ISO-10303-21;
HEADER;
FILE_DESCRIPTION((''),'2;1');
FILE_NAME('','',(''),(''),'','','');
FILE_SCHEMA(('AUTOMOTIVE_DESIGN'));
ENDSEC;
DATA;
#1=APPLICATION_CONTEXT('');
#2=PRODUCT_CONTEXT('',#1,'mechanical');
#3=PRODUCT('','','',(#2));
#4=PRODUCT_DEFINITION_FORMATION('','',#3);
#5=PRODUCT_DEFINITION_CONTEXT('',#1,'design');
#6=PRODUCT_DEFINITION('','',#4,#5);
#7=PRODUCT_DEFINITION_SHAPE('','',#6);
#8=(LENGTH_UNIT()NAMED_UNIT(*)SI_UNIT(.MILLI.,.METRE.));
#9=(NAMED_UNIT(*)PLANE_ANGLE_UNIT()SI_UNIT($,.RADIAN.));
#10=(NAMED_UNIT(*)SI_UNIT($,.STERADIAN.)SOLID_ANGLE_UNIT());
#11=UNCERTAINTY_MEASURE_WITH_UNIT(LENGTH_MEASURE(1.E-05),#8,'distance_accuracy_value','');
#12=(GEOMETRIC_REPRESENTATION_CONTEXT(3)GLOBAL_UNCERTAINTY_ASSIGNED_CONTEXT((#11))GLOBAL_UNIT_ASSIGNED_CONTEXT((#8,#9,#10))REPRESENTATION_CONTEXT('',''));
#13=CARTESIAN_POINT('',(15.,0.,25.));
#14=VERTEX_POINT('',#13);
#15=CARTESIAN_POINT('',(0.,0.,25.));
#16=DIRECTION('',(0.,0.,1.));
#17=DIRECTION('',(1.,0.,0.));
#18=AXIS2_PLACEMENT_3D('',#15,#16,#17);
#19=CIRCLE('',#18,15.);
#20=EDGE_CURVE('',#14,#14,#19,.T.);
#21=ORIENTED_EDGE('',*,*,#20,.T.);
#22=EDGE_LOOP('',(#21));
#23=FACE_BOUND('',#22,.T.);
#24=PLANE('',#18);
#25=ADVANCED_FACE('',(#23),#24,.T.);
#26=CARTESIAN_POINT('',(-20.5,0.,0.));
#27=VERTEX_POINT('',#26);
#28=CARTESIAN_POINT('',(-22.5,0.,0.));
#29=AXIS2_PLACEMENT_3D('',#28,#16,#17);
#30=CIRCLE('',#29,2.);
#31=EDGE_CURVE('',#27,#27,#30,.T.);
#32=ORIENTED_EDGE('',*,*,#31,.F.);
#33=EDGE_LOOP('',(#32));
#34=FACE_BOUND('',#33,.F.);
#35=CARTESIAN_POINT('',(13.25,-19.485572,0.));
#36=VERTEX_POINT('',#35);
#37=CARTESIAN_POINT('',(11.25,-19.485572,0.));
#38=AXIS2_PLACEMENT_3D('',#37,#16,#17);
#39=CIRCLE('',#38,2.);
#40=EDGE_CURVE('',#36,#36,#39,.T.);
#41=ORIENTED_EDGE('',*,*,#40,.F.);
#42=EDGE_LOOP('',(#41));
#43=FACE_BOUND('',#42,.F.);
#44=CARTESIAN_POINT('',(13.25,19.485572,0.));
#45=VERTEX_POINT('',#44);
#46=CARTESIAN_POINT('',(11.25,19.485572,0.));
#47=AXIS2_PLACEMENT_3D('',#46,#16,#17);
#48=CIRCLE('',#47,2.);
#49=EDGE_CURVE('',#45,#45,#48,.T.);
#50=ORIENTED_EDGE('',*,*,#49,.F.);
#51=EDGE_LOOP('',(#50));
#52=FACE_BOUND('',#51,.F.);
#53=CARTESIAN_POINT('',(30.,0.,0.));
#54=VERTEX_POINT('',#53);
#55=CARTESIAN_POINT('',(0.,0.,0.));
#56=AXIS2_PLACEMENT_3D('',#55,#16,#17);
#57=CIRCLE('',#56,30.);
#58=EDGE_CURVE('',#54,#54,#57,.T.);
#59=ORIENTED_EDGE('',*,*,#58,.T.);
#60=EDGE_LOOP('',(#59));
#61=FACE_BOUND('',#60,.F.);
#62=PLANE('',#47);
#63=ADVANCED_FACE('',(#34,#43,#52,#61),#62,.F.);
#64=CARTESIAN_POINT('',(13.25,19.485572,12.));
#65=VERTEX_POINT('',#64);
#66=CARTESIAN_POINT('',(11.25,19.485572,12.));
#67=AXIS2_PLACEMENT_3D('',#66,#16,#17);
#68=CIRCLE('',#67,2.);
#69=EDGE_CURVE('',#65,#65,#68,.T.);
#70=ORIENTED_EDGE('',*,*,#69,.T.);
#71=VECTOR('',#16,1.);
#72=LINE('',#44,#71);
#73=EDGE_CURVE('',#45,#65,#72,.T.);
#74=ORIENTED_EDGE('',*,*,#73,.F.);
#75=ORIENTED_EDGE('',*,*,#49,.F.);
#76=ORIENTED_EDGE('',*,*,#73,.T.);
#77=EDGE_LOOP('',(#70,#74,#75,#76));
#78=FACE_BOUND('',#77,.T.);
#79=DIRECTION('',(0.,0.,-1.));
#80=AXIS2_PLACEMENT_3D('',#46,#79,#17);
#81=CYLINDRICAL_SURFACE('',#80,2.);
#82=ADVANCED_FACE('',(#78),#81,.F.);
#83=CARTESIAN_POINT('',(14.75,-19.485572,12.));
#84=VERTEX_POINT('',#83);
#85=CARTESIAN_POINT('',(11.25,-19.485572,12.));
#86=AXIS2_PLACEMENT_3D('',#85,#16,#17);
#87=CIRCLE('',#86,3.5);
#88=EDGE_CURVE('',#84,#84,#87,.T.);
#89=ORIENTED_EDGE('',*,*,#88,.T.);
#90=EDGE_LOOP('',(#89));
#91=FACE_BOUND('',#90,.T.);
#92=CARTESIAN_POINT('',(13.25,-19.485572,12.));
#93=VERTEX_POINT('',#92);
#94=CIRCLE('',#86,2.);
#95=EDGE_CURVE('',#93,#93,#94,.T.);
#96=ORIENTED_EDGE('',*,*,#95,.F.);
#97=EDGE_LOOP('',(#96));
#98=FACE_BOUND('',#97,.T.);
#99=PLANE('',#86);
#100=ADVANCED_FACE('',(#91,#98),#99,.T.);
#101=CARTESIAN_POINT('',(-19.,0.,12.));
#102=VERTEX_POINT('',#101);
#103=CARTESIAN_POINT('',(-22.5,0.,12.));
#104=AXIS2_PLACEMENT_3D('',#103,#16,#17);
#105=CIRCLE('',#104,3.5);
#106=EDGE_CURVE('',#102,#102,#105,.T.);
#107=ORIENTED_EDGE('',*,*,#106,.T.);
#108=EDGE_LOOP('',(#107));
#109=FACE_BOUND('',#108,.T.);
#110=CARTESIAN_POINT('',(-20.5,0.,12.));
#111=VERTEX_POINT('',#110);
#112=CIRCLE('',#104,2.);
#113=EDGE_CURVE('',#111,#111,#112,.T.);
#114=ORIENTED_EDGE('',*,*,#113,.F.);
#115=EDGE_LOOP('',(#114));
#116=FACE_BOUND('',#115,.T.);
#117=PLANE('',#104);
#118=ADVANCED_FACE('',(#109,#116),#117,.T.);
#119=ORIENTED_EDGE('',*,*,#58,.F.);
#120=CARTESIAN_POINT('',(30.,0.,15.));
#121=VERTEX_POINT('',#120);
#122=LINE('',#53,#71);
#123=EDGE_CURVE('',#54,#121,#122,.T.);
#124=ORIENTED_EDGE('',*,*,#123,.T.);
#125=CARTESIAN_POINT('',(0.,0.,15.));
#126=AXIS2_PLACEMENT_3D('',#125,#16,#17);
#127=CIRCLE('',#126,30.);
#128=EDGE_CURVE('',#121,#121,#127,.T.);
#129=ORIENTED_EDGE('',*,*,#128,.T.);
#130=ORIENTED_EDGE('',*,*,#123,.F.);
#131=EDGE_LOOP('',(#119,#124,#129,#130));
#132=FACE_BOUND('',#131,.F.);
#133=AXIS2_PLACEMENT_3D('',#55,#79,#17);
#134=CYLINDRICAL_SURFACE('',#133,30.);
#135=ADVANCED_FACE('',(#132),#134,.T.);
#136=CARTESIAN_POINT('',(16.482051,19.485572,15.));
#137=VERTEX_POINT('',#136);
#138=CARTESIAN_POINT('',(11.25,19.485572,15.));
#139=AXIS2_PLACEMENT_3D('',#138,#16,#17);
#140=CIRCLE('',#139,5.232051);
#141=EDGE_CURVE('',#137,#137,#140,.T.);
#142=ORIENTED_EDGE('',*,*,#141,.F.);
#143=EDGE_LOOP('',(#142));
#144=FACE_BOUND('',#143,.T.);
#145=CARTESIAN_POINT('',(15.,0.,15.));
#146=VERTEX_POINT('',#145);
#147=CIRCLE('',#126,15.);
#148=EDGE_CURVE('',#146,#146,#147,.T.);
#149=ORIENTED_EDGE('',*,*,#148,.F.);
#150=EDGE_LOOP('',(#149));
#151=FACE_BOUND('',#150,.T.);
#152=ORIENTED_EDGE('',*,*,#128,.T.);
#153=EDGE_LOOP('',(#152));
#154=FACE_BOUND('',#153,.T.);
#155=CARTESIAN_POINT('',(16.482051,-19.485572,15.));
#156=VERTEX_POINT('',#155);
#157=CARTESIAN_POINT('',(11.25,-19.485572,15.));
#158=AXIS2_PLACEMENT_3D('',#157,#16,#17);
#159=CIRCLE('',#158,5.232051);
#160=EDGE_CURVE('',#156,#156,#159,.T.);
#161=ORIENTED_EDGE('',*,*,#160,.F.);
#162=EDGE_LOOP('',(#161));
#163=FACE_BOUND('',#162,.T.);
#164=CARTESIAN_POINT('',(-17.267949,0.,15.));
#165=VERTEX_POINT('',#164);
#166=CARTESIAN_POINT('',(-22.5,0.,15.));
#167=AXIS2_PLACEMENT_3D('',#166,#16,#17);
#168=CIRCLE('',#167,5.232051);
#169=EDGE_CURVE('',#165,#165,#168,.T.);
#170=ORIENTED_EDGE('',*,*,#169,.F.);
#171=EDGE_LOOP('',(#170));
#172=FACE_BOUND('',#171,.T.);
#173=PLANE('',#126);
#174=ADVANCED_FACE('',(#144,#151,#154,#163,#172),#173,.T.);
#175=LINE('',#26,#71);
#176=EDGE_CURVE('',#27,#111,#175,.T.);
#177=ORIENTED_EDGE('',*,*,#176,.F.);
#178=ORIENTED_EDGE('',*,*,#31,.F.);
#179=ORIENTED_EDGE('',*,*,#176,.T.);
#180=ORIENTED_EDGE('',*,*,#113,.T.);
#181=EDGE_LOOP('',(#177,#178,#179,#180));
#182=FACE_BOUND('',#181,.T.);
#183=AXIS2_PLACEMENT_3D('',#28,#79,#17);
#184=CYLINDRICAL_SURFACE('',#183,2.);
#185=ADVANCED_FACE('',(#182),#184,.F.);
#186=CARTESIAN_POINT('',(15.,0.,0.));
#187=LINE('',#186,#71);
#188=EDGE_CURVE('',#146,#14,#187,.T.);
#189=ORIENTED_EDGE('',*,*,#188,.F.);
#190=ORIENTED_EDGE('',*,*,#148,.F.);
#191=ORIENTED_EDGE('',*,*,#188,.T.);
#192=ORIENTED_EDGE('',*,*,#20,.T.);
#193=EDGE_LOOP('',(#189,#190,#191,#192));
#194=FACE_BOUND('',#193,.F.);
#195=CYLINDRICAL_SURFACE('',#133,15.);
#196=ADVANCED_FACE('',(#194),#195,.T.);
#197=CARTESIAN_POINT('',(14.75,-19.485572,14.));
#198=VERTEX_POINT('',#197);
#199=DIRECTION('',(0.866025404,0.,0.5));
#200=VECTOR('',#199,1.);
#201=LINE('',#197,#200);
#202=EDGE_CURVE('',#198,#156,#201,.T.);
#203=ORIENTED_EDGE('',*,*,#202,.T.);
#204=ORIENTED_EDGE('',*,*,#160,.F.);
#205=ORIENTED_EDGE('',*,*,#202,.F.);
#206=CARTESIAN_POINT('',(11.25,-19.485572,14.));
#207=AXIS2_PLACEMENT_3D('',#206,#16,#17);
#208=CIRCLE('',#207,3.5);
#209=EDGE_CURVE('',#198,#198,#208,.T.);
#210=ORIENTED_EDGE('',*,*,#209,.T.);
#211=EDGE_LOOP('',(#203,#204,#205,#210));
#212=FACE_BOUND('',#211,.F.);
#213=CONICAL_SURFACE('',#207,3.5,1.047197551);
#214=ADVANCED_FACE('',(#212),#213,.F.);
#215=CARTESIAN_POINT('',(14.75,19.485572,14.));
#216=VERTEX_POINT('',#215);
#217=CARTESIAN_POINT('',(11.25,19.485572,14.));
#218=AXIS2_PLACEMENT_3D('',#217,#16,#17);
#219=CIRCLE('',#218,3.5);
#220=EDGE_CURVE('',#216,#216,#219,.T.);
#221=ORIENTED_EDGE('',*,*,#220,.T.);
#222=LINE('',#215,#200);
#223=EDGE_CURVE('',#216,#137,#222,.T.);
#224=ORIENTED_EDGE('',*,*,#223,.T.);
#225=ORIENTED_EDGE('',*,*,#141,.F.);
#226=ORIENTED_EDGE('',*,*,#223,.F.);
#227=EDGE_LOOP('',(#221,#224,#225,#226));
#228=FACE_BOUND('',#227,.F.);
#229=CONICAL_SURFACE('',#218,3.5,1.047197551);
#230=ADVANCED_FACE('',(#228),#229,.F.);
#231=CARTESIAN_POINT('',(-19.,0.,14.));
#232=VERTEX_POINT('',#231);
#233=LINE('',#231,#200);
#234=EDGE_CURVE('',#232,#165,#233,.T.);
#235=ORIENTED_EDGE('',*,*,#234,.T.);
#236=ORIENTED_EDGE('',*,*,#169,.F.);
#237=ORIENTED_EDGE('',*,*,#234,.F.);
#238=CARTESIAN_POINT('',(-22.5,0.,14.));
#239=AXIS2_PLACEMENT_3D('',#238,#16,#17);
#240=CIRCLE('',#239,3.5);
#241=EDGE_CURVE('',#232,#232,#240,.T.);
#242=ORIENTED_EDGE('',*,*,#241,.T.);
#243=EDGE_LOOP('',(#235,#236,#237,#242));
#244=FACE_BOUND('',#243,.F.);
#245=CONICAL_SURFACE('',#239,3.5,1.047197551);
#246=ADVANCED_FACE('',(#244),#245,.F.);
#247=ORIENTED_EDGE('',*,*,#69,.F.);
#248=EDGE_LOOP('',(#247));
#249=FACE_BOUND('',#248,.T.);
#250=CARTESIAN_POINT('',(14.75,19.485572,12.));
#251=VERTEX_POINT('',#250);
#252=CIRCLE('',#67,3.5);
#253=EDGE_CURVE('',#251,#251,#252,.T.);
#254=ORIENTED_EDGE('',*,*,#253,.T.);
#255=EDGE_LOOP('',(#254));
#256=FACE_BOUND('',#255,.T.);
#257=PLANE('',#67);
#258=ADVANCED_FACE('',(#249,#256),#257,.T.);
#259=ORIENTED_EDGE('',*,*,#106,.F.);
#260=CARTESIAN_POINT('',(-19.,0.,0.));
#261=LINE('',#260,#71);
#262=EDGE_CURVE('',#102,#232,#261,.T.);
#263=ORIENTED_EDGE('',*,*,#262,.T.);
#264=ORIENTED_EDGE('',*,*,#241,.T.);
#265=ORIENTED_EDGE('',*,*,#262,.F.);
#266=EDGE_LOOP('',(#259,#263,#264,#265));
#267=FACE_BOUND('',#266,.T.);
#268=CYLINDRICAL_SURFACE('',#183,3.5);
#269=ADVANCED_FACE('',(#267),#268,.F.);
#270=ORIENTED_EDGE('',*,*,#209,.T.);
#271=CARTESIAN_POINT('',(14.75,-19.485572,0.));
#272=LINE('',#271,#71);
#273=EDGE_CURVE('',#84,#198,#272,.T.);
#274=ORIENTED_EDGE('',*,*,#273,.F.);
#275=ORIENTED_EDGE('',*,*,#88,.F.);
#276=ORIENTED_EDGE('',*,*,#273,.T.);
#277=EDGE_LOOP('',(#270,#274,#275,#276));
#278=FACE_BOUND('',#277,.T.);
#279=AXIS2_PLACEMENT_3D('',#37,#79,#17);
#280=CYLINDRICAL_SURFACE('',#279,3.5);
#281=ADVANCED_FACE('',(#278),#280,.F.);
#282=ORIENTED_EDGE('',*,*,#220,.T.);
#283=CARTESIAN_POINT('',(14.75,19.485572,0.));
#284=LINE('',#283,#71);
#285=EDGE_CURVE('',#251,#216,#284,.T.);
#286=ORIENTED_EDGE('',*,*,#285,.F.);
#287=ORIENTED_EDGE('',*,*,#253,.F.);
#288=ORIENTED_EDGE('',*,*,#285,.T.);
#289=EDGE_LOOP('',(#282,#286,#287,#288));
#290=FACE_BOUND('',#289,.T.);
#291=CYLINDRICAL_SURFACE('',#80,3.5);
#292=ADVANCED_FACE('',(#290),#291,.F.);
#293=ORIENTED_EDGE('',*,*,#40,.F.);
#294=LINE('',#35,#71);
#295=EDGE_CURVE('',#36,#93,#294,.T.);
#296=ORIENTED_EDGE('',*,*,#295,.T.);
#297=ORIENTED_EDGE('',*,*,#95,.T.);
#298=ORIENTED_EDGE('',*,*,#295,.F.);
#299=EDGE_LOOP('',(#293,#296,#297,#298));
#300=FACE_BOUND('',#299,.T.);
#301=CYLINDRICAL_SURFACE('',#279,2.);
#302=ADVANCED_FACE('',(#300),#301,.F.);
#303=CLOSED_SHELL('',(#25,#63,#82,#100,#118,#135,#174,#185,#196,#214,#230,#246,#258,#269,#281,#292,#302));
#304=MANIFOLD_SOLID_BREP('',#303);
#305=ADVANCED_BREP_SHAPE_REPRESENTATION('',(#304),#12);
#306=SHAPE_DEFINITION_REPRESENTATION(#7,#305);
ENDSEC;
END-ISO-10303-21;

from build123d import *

# Parameters (mm, degrees)
F0_R       = 30
F0_R_2     = 3.5
F0_R_3     = 15
F1_DEPTH   = 15
F2_DEPTH   = 25
F0_R_4     = 2
F3_DEPTH   = 12
F4_SIZE2   = 1.7320508076
F4_SIZE    = 1
F4_2_SIZE2 = 1.7320508076
F4_2_SIZE  = 1
F4_3_SIZE2 = 1.7320508076
F4_3_SIZE  = 1


with BuildPart() as f1:
    # F0 (on Top) → F1 (new body)
    with BuildSketch(Plane.XY):
        Circle(F0_R)
        with Locations((11.25, -19.4855715851)):
            Circle(F0_R_2, mode=Mode.SUBTRACT)
        with Locations((-22.5, 0)):
            Circle(F0_R_2, mode=Mode.SUBTRACT)
        Circle(F0_R_3, mode=Mode.SUBTRACT)
        with Locations((11.25, 19.4855715851)):
            Circle(F0_R_2, mode=Mode.SUBTRACT)
    extrude(amount=F1_DEPTH)

    # F0 (on Top) → F2 (join)
    with BuildSketch(Plane.XY):
        Circle(F0_R_3)
    extrude(amount=F2_DEPTH)

    # F0 (on Top) → F3 (join)
    with BuildSketch(Plane.XY):
        with Locations((11.25, 19.4855715851)):
            Circle(F0_R_2)
        with Locations((11.25, 19.4855715851)):
            Circle(F0_R_4, mode=Mode.SUBTRACT)
        with Locations((11.25, -19.4855715851)):
            Circle(F0_R_2)
        with Locations((11.25, -19.4855715851)):
            Circle(F0_R_4, mode=Mode.SUBTRACT)
        with Locations((-22.5, 0)):
            Circle(F0_R_2)
        with Locations((-22.5, 0)):
            Circle(F0_R_4, mode=Mode.SUBTRACT)
    extrude(amount=F3_DEPTH)

    # F4
    f4_edges = [f1.edges().sort_by_distance(p)[0] for p in [
        (-26, 0, 15),
    ]]
    f4_side = f1.faces().sort_by_distance((-26, 0, 13.5))[0]
    chamfer(f4_edges, length=F4_SIZE, length2=F4_SIZE2, reference=f4_side)

    # F4#2
    f4_2_edges = [f1.edges().sort_by_distance(p)[0] for p in [
        (7.75, -19.485572, 15),
    ]]
    f4_2_side = f1.faces().sort_by_distance((7.75, -19.485572, 13.5))[0]
    chamfer(f4_2_edges, length=F4_2_SIZE, length2=F4_2_SIZE2, reference=f4_2_side)

    # F4#3
    f4_3_edges = [f1.edges().sort_by_distance(p)[0] for p in [
        (7.75, 19.485572, 15),
    ]]
    f4_3_side = f1.faces().sort_by_distance((7.75, 19.485572, 13.5))[0]
    chamfer(f4_3_edges, length=F4_3_SIZE, length2=F4_3_SIZE2, reference=f4_3_side)


solid = f1.part
